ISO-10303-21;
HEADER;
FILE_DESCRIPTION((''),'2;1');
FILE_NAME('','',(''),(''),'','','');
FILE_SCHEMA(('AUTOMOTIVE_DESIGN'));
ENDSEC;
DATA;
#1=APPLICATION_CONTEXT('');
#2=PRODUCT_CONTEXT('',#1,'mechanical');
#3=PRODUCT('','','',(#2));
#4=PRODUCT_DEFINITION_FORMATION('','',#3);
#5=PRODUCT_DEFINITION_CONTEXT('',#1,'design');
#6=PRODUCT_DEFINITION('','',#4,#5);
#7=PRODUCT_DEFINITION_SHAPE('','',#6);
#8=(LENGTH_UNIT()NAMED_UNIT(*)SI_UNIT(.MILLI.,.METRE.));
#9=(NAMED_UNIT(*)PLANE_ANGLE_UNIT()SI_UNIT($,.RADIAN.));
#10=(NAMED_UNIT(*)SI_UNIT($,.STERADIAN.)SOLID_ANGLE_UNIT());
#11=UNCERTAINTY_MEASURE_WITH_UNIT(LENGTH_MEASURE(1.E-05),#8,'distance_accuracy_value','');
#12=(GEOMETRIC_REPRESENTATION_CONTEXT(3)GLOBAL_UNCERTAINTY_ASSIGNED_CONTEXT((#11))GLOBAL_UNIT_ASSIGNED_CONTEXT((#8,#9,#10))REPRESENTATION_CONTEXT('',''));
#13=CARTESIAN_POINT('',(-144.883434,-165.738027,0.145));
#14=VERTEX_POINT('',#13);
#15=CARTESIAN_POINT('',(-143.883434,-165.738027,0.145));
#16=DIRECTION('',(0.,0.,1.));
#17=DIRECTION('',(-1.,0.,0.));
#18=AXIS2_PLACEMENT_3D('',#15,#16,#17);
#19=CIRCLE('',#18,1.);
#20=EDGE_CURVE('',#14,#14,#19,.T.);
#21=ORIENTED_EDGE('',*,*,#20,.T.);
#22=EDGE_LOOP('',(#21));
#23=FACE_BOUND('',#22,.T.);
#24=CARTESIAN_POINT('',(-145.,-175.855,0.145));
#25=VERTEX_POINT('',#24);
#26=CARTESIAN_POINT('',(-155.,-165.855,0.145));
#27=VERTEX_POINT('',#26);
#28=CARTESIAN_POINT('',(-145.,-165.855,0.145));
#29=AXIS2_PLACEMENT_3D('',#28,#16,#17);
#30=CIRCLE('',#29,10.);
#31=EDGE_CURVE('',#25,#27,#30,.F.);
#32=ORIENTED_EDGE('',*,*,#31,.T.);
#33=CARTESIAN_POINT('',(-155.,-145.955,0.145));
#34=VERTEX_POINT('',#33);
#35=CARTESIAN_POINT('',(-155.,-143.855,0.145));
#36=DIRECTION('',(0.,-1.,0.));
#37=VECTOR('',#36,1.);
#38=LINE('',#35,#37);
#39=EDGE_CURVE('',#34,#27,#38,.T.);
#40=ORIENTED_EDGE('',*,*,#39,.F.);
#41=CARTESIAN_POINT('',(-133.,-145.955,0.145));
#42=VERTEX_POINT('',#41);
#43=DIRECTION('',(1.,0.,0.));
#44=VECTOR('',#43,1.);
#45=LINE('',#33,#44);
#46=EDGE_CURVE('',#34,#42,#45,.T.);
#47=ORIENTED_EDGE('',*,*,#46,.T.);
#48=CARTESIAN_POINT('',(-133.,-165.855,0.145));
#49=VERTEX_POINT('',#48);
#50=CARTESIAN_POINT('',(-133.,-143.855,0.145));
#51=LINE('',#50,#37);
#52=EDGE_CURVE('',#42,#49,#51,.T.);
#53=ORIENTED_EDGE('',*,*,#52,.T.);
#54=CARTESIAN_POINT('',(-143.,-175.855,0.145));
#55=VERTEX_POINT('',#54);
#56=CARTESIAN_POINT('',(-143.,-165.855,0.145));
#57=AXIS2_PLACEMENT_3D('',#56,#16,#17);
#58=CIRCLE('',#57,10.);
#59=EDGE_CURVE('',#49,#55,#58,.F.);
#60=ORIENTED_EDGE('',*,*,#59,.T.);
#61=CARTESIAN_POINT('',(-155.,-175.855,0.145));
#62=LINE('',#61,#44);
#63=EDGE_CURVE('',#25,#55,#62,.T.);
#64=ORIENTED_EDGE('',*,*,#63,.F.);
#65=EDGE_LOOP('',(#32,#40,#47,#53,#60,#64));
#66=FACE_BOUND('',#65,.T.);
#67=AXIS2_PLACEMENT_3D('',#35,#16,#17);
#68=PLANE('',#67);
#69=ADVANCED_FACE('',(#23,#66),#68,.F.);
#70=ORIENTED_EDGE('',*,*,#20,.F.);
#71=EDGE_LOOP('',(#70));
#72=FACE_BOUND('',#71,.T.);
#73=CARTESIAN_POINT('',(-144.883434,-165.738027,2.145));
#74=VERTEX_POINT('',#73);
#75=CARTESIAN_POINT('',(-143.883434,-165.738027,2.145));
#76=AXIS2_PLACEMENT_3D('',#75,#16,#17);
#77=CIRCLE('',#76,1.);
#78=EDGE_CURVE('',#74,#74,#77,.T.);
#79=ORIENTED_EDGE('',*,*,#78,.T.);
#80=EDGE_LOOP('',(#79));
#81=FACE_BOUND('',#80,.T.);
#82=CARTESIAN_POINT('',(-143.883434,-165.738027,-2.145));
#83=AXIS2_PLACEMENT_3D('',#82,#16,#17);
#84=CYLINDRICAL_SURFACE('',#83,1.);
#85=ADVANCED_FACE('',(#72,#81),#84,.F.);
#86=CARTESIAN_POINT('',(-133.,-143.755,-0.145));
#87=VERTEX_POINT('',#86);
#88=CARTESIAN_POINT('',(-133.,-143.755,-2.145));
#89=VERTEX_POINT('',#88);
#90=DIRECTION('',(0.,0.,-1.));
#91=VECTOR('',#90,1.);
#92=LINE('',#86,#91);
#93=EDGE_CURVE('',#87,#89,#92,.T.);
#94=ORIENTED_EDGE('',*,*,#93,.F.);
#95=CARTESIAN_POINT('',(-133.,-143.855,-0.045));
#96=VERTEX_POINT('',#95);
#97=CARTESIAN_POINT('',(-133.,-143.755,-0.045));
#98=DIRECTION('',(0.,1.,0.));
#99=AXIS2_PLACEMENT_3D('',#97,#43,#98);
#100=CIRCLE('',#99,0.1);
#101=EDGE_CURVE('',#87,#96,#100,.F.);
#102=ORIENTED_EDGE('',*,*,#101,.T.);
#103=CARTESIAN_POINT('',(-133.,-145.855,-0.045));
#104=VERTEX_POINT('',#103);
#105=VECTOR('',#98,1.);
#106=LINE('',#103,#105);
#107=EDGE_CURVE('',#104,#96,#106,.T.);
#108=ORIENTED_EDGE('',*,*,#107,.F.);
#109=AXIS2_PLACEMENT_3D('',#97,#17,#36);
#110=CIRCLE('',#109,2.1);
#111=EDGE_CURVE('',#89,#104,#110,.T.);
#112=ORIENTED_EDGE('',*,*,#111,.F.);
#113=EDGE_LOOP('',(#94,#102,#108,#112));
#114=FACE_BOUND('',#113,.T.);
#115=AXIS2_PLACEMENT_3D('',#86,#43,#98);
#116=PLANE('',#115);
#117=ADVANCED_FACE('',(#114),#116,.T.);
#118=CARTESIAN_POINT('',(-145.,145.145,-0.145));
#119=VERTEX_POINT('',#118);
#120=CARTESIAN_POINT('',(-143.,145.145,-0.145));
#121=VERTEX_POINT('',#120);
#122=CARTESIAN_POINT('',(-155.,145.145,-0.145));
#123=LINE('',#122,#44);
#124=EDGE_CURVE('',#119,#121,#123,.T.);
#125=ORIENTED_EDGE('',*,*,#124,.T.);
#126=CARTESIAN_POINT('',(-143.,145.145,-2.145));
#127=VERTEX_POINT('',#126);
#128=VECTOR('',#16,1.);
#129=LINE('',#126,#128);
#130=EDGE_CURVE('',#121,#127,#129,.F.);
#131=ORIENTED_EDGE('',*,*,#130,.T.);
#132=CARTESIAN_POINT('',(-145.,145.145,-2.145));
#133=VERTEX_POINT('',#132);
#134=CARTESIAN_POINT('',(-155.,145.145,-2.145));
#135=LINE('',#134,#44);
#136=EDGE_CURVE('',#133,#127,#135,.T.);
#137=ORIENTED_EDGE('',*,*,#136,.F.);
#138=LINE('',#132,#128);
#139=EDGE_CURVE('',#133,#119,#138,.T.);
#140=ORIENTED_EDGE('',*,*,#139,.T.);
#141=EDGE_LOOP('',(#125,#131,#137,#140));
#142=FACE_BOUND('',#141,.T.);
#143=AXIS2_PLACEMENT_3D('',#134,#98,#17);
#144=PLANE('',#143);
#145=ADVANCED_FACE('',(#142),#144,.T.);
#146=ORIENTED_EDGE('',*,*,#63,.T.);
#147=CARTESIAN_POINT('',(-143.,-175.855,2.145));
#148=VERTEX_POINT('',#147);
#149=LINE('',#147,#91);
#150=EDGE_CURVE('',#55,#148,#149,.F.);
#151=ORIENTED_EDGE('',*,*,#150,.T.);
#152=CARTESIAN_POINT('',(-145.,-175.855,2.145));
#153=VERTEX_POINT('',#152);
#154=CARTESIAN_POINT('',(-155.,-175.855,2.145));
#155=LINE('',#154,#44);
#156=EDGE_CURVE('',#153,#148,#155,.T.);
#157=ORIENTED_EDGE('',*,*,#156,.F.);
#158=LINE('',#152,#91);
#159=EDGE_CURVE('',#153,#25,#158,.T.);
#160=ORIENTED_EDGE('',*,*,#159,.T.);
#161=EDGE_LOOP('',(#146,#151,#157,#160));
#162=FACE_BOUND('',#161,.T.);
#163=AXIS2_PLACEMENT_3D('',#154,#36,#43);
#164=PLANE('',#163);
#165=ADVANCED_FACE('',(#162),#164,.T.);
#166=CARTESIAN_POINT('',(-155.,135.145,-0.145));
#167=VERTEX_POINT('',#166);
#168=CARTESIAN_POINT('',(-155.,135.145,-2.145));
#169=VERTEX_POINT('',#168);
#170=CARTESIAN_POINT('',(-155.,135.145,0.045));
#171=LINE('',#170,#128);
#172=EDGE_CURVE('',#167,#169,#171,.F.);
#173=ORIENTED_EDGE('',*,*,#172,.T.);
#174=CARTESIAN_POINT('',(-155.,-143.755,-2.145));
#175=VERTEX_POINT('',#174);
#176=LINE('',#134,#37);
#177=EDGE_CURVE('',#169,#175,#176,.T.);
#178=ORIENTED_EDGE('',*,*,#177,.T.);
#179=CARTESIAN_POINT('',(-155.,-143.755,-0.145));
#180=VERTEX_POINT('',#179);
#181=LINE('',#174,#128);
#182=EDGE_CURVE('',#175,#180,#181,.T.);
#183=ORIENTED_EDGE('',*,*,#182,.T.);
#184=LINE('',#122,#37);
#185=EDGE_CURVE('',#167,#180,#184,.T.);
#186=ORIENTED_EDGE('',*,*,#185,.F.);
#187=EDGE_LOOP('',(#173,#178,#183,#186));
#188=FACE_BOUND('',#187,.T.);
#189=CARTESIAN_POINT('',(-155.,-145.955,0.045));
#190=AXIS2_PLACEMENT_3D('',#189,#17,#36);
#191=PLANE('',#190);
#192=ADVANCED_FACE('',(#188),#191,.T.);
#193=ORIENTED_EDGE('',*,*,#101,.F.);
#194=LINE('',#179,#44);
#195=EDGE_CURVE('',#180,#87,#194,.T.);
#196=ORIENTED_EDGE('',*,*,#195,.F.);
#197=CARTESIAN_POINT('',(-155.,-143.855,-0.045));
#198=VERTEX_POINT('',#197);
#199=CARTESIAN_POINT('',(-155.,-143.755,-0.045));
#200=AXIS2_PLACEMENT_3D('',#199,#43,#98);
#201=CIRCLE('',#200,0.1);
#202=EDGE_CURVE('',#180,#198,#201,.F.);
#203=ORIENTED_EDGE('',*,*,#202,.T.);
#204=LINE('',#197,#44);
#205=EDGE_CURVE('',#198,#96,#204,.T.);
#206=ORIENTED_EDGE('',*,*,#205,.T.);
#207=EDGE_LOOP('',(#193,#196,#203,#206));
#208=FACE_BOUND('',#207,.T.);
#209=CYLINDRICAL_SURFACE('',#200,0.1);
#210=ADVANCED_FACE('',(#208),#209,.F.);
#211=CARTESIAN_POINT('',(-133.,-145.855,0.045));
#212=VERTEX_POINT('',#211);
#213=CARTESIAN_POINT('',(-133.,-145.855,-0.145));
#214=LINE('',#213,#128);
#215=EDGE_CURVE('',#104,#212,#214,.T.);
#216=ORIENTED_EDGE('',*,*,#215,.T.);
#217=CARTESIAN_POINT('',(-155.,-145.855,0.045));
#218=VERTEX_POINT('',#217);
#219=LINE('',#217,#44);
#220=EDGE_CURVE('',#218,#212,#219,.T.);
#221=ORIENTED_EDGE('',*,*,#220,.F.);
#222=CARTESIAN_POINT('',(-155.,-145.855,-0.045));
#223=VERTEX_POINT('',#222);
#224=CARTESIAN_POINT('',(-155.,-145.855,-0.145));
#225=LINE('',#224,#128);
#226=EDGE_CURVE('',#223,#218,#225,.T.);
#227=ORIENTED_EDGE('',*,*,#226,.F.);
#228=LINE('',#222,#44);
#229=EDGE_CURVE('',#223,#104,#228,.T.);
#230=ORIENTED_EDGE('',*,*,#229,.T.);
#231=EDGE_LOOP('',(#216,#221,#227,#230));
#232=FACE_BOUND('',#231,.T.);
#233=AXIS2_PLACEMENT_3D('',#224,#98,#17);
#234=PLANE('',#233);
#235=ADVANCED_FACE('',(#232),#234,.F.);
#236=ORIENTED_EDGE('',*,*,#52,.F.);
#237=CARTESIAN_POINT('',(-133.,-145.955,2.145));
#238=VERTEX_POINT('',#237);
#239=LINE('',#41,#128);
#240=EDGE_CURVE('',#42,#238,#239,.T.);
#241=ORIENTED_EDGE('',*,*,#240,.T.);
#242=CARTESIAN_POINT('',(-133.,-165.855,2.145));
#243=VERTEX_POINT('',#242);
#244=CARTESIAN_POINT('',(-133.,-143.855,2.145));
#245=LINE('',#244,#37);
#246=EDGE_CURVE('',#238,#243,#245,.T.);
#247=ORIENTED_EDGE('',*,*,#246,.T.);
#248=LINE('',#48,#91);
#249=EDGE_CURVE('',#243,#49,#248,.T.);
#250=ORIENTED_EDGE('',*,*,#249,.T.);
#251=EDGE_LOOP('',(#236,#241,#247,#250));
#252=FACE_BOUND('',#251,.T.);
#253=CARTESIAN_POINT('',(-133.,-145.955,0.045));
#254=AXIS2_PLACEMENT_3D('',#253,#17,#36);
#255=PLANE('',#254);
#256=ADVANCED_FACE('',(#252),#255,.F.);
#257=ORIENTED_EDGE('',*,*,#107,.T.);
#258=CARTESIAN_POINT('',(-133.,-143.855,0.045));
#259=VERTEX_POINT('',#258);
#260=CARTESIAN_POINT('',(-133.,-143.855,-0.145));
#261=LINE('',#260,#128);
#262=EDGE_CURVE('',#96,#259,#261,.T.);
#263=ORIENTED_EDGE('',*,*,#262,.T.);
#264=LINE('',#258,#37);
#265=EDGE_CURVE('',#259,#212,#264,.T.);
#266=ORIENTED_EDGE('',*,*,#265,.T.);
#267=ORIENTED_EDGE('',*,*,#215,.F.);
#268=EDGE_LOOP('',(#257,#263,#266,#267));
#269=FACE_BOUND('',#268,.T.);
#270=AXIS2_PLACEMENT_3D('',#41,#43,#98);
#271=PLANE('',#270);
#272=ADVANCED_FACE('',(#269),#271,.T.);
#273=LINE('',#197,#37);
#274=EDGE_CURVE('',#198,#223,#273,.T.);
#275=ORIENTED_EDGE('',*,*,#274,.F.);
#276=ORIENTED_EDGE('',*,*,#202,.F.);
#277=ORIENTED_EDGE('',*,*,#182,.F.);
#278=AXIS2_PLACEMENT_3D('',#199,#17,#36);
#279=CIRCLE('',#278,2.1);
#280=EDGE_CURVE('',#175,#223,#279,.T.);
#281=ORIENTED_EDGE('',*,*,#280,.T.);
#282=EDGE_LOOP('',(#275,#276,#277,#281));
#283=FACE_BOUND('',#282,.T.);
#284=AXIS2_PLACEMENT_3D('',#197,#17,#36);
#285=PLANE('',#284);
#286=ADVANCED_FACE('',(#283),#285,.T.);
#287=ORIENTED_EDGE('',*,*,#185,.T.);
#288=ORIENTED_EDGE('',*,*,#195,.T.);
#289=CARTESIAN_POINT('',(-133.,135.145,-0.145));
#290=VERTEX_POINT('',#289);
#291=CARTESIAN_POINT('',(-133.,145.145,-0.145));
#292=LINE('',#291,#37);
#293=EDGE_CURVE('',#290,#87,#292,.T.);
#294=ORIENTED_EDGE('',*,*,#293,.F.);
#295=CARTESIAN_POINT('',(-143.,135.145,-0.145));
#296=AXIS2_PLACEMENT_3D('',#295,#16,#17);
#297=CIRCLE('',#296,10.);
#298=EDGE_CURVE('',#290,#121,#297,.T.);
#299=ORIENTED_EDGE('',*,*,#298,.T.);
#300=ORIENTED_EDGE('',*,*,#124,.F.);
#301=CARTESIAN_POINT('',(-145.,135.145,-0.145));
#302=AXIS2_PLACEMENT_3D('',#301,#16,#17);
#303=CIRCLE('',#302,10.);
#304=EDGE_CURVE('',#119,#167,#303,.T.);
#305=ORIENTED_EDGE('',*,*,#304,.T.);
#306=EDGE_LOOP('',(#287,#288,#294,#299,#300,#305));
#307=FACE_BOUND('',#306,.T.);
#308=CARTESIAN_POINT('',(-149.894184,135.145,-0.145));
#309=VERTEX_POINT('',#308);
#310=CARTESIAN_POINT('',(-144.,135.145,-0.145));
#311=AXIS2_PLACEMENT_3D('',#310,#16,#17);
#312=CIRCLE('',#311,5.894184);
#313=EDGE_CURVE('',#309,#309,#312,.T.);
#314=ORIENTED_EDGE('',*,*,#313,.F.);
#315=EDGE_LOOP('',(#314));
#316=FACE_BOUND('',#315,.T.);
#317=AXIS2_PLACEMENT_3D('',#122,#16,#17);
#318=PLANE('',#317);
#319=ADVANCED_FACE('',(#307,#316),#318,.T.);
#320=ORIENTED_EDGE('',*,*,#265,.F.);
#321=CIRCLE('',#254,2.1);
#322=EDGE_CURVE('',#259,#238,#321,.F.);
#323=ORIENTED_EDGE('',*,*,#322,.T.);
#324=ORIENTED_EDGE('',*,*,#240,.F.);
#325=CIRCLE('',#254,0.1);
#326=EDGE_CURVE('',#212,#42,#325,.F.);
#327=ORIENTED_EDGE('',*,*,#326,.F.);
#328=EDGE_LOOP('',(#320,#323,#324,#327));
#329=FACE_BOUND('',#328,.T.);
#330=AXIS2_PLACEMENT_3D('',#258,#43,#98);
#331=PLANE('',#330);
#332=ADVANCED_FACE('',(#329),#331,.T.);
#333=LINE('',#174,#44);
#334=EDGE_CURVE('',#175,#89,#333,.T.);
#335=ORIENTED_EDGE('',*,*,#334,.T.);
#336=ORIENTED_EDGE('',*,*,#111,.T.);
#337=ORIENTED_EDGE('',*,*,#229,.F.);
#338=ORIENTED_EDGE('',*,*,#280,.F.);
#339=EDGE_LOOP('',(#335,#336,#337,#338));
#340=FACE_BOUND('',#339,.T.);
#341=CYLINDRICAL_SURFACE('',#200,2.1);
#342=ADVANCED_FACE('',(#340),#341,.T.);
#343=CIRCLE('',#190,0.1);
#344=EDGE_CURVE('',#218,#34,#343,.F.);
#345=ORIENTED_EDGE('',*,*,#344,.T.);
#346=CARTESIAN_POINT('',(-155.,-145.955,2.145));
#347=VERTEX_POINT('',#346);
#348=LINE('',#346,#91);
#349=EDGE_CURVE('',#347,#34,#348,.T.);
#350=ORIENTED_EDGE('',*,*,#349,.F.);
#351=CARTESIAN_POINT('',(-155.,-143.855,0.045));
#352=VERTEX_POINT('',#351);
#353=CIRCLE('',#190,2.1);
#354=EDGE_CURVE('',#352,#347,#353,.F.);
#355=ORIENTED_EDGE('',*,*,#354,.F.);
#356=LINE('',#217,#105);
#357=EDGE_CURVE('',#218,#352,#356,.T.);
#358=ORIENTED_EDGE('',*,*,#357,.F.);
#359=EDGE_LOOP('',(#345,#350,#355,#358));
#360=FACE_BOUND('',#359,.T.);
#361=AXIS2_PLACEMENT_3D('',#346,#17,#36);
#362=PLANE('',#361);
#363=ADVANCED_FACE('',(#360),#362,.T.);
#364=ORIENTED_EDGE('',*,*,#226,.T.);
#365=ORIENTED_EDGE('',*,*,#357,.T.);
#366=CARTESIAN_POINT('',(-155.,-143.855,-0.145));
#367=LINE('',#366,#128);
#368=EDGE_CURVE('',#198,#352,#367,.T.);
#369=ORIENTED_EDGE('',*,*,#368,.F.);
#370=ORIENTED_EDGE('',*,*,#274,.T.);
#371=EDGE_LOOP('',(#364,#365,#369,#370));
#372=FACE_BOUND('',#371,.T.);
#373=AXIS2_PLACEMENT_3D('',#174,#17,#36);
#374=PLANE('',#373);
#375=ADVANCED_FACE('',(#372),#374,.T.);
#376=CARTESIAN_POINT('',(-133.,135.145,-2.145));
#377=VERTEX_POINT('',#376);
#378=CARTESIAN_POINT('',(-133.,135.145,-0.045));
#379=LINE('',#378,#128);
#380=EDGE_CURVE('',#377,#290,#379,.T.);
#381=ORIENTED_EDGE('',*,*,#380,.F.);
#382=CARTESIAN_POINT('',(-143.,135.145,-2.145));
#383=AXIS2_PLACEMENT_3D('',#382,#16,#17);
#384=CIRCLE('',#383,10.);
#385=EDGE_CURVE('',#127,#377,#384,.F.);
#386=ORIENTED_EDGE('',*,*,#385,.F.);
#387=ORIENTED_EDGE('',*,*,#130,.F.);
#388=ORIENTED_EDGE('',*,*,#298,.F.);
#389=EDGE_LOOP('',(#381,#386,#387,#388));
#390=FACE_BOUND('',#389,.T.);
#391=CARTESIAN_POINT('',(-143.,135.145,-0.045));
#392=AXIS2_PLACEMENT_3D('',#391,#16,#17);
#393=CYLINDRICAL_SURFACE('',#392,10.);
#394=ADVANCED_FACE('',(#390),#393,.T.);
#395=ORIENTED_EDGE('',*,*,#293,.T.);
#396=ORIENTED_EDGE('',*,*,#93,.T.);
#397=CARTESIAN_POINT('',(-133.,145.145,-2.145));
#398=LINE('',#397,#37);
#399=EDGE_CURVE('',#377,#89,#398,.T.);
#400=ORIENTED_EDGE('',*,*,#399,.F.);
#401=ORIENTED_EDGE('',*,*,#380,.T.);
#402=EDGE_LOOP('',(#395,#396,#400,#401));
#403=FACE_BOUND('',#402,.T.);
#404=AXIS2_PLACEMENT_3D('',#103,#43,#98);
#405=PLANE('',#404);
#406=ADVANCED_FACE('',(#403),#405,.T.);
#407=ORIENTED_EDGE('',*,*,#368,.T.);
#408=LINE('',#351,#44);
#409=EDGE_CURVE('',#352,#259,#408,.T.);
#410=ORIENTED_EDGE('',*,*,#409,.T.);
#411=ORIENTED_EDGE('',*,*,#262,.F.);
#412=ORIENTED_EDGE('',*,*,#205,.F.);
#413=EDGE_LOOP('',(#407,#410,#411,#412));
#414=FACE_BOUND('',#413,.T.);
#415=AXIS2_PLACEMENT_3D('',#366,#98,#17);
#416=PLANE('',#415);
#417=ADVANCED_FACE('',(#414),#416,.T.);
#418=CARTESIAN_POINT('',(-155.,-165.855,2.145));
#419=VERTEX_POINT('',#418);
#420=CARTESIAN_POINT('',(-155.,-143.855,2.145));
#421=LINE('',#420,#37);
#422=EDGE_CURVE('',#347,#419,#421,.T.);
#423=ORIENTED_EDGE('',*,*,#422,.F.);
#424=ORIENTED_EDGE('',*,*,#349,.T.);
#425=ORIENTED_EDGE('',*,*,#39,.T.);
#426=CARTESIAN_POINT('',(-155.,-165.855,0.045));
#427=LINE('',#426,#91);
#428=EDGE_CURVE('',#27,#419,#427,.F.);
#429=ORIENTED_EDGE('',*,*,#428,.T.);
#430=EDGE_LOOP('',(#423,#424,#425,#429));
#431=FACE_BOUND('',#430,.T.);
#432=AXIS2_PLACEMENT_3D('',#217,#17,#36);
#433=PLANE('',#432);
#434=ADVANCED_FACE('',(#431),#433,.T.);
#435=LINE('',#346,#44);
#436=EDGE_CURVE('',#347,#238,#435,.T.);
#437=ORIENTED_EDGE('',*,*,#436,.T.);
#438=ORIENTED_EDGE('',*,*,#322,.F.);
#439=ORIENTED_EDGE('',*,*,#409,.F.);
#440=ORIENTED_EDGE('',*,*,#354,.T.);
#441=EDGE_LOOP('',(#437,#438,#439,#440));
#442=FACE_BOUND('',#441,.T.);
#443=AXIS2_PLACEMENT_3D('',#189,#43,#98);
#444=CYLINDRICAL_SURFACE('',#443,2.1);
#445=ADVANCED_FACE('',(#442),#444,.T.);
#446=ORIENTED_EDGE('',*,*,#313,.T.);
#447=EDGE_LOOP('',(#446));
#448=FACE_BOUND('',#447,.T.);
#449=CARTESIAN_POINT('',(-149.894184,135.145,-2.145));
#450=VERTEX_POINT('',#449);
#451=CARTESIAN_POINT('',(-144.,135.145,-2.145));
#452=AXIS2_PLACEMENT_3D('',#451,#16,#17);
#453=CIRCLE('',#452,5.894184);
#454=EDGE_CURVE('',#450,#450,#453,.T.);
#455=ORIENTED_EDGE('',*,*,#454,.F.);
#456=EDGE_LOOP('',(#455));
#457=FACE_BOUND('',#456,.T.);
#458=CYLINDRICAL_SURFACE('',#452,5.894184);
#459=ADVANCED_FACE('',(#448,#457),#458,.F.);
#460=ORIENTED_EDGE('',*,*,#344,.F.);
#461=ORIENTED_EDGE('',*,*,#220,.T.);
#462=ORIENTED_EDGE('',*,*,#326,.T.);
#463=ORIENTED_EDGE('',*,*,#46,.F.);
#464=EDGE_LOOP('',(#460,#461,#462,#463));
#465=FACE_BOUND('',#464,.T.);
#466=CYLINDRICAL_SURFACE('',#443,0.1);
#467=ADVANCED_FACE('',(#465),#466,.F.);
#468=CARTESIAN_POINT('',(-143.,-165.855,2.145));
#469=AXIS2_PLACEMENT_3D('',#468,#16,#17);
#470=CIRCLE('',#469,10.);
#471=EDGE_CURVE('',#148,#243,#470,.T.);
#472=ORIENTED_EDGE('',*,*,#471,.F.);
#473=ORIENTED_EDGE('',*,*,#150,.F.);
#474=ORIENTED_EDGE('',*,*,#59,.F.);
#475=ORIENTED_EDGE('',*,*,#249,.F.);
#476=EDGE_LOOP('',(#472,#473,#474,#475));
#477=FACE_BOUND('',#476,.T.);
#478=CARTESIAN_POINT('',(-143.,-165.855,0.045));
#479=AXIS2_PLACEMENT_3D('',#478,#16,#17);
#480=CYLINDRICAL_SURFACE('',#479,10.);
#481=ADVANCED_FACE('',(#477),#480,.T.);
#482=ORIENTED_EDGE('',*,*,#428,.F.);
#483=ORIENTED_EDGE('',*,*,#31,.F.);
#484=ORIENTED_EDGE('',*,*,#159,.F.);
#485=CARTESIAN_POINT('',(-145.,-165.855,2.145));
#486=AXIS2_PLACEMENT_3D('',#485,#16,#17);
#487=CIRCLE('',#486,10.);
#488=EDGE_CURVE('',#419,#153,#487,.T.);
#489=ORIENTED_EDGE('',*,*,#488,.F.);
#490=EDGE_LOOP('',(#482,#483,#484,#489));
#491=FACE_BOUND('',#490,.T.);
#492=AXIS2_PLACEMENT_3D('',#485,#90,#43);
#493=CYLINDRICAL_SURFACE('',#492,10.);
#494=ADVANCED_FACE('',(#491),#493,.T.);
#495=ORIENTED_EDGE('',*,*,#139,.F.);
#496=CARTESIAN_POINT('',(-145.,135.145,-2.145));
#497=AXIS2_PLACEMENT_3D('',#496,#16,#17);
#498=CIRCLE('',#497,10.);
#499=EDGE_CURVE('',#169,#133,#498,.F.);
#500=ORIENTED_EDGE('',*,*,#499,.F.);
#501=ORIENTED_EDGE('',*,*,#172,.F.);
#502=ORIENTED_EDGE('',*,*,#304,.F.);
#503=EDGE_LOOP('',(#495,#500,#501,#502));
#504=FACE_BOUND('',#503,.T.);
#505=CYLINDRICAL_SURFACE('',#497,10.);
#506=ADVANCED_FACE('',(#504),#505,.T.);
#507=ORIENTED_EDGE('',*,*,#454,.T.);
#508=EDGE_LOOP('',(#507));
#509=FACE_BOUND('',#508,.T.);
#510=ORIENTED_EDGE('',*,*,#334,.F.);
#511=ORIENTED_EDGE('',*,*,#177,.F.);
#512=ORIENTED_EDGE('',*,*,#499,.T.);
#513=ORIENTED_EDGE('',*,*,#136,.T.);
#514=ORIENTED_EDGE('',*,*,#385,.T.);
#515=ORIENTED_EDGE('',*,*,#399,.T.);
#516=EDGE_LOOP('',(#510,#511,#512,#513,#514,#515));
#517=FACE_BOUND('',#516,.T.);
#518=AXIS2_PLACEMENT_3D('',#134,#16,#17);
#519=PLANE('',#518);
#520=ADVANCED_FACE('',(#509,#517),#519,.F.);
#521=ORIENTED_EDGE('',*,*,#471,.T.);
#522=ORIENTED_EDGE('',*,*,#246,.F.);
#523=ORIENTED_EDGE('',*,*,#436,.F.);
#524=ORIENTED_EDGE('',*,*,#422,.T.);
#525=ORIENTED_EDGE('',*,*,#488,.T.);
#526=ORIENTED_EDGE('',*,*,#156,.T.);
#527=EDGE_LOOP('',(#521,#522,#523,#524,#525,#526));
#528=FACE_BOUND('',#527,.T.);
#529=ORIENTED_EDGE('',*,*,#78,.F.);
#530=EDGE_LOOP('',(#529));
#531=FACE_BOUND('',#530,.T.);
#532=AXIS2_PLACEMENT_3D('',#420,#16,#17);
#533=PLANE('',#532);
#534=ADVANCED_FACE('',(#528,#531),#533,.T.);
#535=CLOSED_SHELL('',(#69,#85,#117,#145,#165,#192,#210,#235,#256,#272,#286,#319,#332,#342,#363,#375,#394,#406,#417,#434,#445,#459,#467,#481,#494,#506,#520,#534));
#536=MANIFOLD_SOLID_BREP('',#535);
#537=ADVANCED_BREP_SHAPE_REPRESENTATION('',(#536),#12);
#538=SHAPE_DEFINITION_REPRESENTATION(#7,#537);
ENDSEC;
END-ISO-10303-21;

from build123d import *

# Parameters (mm, degrees)
BASE_FLANGE1_DEPTH      = 11
FILLET1_R               = 10
CUT_EXTRUDE1_DEPTH      = 290.218332925
CUT_EXTRUDE1_DEPTH_BACK = 290.218332925
SKETCH7_R               = 5.894184215
SKETCH7_R_2             = 1
BODY_MOVE_COPY1_ANGLE   = 120


# Sheet-metal steps are written as plain solids
with BuildPart() as part:
    # Sketch2 → Base-Flange1 (new, symmetric)
    with BuildSketch(Plane.XY):
        with BuildLine():
            Line((-289, 0), (-0.1, 0))
            ThreePointArc((-0.1, 0), (-0.029289322, 0.029289322), (0, 0.1))
            Line((0, 0.1), (0, 0.19))
            ThreePointArc((0, 0.19), (0.61507576, 1.67492424), (2.1, 2.29))
            Line((2.1, 2.29), (32, 2.29))
            Line((32, 2.29), (32, 0.29))
            Line((32, 0.29), (2.1, 0.29))
            ThreePointArc((2.1, 0.29), (2.029289322, 0.260710678), (2, 0.19))
            Line((2, 0.19), (2, 0.1))
            ThreePointArc((2, 0.1), (1.38492424, -1.38492424), (-0.1, -2))
            Line((-0.1, -2), (-289, -2))
            Line((-289, -2), (-289, 0))
        make_face()
    extrude(amount=BASE_FLANGE1_DEPTH, both=True)

    # Fillet1
    fillet1_edges = [part.edges().sort_by_distance(p)[0] for p in [
        (-289, -1, -11),
        (32, 1.29, -11),
        (-289, -1, 11),
        (32, 1.29, 11),
    ]]
    fillet(fillet1_edges, radius=FILLET1_R)

    # Sketch7 → Cut-Extrude1 (cut, two sides: drawn at the far end of the back side and taken through both)
    with BuildSketch(Plane(origin=(0, 0, 0), x_dir=(1, 0, 0), z_dir=(0, 1, 0)).offset(-CUT_EXTRUDE1_DEPTH_BACK)):
        with Locations(Location((-279, 0, 0), (0, 0, 270))):
            Circle(SKETCH7_R)
        with Locations(Location((21.883026743, 0.116566496, 0), (0, 0, 270))):
            Circle(SKETCH7_R_2)
    extrude(amount=CUT_EXTRUDE1_DEPTH + CUT_EXTRUDE1_DEPTH_BACK, mode=Mode.SUBTRACT)


with BuildPart() as part_1:
    # Body-Move/Copy1: moved
    add(part.part.moved(Location((0, 0, 0))).rotate(Axis((-95.951666667, -47.903333333, -48.048333333), (0.5773502691899637, -0.5773502691896031, -0.5773502691893106)), BODY_MOVE_COPY1_ANGLE))


solid = part_1.part
